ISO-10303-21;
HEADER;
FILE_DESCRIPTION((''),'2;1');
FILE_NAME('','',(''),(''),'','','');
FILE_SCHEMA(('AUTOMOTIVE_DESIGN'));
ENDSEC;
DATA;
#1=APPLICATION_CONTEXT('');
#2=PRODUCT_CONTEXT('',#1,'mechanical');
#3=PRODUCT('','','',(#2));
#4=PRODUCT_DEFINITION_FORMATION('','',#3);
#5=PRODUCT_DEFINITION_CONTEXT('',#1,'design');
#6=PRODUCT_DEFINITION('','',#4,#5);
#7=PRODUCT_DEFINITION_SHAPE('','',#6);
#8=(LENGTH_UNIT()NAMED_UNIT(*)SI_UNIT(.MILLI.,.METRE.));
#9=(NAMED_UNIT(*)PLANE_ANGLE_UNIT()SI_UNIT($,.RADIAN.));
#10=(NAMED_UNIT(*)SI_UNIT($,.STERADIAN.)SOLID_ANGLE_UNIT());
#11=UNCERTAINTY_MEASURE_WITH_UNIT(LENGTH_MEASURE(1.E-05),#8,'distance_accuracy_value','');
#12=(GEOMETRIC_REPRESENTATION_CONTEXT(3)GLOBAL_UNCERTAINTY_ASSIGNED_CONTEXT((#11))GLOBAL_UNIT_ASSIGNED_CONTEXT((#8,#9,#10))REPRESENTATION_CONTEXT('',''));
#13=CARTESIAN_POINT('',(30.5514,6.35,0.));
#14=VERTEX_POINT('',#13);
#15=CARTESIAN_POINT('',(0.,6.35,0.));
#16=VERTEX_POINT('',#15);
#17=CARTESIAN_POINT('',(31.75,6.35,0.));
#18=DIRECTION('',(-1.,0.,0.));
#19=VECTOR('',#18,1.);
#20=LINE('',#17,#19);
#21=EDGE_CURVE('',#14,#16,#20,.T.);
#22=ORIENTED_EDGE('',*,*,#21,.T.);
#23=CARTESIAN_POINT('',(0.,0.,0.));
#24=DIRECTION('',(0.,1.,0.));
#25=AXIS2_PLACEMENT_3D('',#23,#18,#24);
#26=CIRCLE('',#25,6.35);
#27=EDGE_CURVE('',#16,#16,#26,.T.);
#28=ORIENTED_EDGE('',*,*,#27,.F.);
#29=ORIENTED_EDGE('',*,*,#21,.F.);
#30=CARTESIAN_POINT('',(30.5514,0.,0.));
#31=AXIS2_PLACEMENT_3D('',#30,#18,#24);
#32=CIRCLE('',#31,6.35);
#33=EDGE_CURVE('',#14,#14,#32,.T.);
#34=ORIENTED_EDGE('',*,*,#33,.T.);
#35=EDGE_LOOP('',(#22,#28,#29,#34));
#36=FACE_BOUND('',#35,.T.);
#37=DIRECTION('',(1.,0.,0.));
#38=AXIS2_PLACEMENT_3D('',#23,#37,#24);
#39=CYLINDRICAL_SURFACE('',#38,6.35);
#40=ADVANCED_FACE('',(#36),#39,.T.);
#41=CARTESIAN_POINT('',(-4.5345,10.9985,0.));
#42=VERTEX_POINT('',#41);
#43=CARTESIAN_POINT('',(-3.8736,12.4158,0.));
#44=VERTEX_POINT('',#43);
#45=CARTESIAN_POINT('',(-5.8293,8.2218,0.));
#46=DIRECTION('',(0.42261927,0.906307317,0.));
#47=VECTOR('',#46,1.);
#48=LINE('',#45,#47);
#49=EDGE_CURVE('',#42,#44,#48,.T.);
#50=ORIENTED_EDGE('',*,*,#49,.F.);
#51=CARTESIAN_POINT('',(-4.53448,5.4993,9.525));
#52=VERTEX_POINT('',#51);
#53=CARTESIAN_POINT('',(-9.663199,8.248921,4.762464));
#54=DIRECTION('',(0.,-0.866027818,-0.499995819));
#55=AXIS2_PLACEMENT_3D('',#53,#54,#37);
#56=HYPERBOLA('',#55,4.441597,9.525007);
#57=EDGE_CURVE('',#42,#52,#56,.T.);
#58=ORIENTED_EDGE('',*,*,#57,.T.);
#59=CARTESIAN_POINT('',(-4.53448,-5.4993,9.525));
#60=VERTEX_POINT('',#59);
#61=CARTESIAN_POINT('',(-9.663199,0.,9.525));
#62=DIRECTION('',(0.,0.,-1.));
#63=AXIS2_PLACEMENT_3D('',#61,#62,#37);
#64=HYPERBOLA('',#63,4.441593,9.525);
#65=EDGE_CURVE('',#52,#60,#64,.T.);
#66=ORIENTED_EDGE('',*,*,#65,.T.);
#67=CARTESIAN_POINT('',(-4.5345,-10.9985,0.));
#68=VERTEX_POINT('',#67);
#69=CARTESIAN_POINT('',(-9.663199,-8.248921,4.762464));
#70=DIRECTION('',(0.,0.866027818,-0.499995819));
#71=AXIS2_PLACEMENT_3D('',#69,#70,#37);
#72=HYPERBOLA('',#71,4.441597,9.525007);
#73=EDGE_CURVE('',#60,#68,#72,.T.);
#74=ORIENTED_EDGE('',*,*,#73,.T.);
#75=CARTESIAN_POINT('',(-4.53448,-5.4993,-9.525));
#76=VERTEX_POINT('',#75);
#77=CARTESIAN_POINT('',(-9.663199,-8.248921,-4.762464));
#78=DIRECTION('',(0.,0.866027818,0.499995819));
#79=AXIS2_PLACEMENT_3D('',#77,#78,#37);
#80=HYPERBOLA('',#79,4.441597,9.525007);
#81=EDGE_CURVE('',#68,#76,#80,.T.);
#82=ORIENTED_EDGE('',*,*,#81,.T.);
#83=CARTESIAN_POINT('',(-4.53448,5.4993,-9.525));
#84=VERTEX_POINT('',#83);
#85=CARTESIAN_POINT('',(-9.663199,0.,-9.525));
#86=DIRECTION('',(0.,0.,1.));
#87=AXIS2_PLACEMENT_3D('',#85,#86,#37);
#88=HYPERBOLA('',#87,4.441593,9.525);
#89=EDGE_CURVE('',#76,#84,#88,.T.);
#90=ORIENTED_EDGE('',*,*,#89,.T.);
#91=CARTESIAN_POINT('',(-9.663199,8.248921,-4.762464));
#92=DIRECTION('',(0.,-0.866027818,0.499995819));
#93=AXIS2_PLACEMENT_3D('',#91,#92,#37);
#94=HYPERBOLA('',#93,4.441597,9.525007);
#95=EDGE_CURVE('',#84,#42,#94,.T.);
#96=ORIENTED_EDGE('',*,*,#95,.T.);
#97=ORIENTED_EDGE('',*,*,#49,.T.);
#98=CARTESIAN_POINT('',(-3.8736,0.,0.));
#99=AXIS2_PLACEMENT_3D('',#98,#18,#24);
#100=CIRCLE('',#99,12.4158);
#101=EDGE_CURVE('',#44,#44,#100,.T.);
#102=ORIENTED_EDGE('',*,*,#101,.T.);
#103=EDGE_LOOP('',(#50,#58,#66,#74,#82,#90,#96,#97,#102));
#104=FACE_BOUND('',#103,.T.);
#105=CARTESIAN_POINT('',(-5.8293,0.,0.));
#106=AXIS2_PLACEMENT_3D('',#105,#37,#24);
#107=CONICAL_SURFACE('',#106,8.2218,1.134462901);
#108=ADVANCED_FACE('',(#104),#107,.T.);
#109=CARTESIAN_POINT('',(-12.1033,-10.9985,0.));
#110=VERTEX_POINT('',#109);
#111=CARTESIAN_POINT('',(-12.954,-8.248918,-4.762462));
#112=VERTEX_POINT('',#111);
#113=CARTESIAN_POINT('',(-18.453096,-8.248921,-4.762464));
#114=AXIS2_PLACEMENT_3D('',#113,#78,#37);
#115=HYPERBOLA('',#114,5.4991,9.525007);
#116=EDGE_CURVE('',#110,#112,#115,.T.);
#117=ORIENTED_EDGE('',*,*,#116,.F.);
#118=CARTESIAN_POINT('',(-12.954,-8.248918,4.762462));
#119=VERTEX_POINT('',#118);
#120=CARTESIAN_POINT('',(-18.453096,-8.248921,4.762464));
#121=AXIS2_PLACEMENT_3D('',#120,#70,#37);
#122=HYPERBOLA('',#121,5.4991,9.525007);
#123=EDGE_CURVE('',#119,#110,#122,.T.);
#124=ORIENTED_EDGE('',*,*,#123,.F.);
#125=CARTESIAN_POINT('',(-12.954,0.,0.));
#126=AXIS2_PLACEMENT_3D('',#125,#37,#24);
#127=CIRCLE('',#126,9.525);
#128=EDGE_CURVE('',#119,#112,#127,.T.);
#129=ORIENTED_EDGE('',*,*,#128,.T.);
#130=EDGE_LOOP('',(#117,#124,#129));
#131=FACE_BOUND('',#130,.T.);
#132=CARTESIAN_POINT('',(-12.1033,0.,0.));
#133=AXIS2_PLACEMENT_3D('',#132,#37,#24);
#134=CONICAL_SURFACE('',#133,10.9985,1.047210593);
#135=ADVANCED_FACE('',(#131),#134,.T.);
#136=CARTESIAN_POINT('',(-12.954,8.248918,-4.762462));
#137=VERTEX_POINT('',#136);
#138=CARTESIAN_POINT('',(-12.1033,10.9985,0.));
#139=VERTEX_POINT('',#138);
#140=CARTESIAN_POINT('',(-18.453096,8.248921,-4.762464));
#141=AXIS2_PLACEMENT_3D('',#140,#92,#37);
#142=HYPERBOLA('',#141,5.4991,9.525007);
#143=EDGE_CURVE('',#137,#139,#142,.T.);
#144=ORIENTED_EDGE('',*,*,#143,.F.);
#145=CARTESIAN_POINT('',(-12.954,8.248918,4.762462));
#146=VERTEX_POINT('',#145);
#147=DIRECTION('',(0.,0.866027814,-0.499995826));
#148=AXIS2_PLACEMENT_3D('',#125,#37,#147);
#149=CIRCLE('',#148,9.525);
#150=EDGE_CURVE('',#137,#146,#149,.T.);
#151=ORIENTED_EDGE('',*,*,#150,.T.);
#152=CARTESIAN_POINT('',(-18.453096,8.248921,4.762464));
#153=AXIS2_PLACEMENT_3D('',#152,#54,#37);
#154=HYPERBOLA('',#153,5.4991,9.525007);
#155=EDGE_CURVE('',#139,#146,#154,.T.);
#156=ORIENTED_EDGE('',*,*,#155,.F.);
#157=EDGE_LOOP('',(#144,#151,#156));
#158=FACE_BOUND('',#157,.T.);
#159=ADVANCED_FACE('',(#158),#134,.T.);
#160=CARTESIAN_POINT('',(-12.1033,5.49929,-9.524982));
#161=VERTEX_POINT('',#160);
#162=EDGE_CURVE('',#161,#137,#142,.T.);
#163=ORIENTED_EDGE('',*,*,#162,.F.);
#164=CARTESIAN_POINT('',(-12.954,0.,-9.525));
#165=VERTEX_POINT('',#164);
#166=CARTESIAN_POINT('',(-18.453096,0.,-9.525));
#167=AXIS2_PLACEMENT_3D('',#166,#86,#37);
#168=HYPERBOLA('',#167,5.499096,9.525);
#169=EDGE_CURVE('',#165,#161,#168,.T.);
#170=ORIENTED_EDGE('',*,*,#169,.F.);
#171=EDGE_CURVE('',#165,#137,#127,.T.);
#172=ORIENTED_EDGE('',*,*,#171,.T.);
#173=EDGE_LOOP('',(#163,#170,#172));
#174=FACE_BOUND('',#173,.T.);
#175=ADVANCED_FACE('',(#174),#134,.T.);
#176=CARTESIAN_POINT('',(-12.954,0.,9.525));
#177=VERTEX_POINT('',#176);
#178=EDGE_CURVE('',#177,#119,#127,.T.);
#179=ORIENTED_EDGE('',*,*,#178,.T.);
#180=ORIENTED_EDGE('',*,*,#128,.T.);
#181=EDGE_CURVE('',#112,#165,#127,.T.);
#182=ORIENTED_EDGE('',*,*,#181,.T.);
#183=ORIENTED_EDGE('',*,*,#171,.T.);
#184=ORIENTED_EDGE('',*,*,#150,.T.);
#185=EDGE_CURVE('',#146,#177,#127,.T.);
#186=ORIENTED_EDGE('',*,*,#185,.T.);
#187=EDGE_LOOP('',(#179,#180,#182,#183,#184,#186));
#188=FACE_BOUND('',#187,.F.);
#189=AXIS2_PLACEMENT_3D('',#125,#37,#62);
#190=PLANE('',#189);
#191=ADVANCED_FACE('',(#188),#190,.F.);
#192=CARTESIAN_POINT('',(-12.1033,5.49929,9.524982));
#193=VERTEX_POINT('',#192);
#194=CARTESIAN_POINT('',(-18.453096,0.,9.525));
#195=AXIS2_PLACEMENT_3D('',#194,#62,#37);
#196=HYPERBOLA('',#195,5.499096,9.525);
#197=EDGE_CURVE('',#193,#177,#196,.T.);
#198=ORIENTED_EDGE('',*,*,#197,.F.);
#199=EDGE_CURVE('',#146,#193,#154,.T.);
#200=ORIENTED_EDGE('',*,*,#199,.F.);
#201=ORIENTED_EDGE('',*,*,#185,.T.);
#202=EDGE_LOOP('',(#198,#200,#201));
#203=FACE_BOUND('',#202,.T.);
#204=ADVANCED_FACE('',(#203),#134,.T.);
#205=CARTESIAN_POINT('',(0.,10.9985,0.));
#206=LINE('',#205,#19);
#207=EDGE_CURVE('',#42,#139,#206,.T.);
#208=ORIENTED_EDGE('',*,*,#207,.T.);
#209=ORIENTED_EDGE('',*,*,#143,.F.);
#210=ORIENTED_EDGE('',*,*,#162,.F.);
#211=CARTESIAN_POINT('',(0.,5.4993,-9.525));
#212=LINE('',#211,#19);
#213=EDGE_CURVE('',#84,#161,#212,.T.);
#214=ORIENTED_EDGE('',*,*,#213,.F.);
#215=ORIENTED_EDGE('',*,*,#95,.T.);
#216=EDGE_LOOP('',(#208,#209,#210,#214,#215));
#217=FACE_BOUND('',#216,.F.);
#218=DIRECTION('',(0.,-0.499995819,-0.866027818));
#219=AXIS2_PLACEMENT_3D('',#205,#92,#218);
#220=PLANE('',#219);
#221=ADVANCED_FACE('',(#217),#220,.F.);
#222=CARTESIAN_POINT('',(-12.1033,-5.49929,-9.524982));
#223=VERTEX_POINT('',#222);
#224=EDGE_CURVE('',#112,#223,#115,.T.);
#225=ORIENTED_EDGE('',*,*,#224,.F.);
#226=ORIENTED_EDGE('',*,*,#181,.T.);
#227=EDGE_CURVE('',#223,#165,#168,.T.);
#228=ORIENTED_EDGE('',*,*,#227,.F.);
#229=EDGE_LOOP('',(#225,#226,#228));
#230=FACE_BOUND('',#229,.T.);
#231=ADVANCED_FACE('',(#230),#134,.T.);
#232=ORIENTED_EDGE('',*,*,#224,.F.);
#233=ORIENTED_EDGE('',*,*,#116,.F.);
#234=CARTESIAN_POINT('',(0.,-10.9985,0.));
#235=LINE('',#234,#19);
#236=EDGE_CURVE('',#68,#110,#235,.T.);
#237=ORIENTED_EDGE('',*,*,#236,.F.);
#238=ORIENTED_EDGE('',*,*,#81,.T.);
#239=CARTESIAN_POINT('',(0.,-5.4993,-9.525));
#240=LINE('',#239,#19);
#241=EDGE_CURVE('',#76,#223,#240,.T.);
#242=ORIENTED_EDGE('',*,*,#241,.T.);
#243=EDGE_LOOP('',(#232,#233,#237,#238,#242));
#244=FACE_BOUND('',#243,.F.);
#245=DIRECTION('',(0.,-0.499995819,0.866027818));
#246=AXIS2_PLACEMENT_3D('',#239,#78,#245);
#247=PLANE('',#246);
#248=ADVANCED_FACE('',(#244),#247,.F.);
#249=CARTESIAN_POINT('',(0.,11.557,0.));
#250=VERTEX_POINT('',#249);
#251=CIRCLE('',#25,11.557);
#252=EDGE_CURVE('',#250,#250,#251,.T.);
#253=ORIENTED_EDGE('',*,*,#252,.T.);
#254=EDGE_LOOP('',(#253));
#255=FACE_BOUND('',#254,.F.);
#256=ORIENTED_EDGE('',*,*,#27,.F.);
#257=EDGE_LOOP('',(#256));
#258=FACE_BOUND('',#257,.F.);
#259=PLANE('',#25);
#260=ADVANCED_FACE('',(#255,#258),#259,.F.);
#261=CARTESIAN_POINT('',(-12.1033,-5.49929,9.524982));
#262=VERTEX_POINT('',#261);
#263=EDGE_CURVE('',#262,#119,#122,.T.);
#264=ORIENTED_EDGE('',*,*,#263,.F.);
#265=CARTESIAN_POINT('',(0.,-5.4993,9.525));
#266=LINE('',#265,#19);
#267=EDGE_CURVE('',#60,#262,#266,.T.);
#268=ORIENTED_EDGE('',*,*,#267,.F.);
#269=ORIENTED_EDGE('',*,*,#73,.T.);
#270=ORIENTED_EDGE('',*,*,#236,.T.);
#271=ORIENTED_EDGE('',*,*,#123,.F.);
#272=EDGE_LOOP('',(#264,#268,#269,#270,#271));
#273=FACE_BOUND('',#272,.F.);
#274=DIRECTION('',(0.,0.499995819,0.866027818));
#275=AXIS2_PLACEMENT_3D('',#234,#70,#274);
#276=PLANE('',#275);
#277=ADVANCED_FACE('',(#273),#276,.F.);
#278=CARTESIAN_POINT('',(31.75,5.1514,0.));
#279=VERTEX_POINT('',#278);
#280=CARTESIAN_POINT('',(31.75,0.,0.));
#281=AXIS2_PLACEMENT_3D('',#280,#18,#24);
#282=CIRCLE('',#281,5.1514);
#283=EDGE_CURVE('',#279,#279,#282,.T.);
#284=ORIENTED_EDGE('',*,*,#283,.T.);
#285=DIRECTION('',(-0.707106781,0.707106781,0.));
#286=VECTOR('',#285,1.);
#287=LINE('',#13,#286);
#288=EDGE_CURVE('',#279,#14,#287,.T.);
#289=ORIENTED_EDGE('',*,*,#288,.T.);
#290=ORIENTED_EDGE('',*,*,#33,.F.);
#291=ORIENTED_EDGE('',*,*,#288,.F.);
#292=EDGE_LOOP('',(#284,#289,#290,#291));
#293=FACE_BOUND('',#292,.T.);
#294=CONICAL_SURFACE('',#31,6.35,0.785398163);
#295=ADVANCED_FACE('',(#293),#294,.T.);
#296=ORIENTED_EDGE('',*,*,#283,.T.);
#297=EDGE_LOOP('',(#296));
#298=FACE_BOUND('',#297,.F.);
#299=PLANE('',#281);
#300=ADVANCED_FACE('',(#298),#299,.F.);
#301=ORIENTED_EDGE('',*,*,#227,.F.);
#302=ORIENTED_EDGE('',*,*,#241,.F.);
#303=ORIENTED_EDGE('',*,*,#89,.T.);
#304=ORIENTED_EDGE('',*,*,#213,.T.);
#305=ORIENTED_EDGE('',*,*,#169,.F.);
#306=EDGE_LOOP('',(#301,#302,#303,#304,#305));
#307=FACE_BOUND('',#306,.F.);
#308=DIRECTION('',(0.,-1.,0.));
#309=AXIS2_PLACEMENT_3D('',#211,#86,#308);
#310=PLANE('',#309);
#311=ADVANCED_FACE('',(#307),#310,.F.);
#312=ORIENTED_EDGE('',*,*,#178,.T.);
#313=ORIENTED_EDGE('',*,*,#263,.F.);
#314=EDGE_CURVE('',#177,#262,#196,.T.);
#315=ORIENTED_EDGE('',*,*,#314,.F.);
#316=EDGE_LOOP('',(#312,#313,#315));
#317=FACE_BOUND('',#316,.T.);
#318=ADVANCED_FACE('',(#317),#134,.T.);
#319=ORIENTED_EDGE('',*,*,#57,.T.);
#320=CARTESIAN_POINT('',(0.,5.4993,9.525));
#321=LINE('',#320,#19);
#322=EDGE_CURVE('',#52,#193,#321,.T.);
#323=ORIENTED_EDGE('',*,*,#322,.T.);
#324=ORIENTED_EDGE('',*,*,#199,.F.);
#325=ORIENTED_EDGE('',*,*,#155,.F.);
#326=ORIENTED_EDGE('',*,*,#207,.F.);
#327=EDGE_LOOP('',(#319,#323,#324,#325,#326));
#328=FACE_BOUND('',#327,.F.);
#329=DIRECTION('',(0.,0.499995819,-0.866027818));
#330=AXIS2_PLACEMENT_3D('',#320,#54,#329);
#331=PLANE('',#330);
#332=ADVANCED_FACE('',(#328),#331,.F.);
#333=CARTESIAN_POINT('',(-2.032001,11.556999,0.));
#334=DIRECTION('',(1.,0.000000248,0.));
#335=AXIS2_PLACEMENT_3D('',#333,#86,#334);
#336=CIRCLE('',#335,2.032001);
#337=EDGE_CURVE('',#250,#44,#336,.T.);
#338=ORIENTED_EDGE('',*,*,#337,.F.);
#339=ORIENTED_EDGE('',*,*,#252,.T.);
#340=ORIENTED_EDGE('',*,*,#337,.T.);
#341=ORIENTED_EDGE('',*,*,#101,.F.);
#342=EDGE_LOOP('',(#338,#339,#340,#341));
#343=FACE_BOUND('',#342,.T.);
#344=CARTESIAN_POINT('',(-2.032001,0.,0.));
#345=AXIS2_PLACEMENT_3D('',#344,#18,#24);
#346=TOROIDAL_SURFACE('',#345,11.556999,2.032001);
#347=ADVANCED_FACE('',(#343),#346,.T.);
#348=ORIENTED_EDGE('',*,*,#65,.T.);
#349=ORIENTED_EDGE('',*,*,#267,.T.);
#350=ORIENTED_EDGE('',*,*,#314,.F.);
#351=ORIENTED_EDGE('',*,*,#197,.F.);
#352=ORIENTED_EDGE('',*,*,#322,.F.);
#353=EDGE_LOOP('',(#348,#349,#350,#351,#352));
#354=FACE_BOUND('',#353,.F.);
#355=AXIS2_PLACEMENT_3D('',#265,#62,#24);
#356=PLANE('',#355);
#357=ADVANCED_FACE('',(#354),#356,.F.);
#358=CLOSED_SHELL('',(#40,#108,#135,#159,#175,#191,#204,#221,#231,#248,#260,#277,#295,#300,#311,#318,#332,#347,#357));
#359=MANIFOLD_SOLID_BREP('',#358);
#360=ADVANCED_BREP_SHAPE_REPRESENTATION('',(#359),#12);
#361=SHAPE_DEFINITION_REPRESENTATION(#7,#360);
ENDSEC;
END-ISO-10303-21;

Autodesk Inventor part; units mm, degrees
ref_plane "YZ Plane" through (0, 0, 0) normal (1, 0, 0) x (0, 1, 0)
ref_plane "XZ Plane" through (0, 0, 0) normal (0, 1, 0) x (-1, 0, 0)
sketch "Sketch1" plane through (0, 0, 0) normal (0, 0, 1) x (1, 0, 0)
  line L0 (-5.8293, 0) -> (-5.8293, 8.2218)
  line L1 (0, 11.557) -> (0, 6.35)
  line L2 (5.1308, 6.35) -> (31.75, 6.35)
  line L3 (31.75, 6.35) -> (31.75, 0)
  line L4 (31.75, 0) -> (-5.8293, 0)
  arc A0 (0, 11.557) -> (-3.8736, 12.4158) centre (-2.032, 11.557) ccw
  line L5 (0, -2.794) -> (0, 16.7643) projected
  line L6 (-13.3452, 0) -> (39.2659, 0) projected
  line L7 (0, 6.35) -> (0.0001, 6.35)
  line L8 (0.0001, 6.35) -> (0.0001, 6.35)
  line L9 (0.0001, 6.35) -> (2.2098, 6.35)
  line L10 (2.2098, 6.35) -> (5.1308, 6.35)
  line L11 (-5.8293, 8.2218) -> (-3.8736, 12.4158)
  line L12 (0.0001, 6.35) -> (5.1308, 6.35) construction
  line L13 (5.1308, 6.35) -> (5.1308, 0) construction
  dimension "d0" = 2.032
  dimension "d1" = 31.75
  dimension "d2" = 26.6192
  dimension "d3" = 27.178
  dimension "d4" = 12.7
  dimension "d5" = 5.8293
  dimension "d15" = 12.7
  dimension "d16" = 12.7
  dimension "d17" = 0.0001
  dimension "d18" = 2.921
  dimension "d19" = 25
revolve "Body" add sketch "Sketch1" angle 360 about axis through (31.75, 0, 0) along (-1, 0, 0)
sketch "Sketch2" plane through (0, 0, 0) normal (1, 0, 0) x (0, 0, -1)
  line L0 (9.525, 5.4993) -> (9.525, -5.4993)
  line L1 (9.525, -5.4993) -> (0, -10.9985)
  line L2 (0, -10.9985) -> (-9.525, -5.4993)
  line L3 (-9.525, -5.4993) -> (-9.525, 5.4993)
  line L4 (-9.525, 5.4993) -> (0, 10.9985)
  line L5 (0, 10.9985) -> (9.525, 5.4993)
  point P0 (0, 0)
  point P1 (0, 0)
  dimension "d23" = 19.05
extrude "Head" add sketch "Sketch2" against normal blind 12.954
sketch "Sketch3" plane through (0, 0, 0) normal (0, 0, 1) x (1, 0, 0)
  line L0 (-12.954, 9.525) -> (-12.954, 10.9985)
  line L1 (-12.954, 10.9985) -> (-12.1033, 10.9985)
  line L2 (-12.1033, 10.9985) -> (-12.954, 9.525)
  line L3 (-14.6379, 0) -> (-2.8506, 0) projected
  line L4 (-12.954, 10.9985) -> (-12.954, 5.4993) projected
  line L5 (-4.5345, 10.9985) -> (-12.954, 10.9985) projected
  point P0 (-12.954, 5.4993)
  dimension "d8" = 30
  dimension "d22" = 19.05
revolve "Chamfer1" cut sketch "Sketch3" angle 360 about axis through (-10, 0, 0) along (1, 0, 0)
thread "Thread" size "1/2-13 UNC" class "2A" standard "ANSI Unified Screw Threads" length 26.6192
chamfer "Chamfer2" distance 1.1986 distance2 1.1986 1 edges at (31.75, -6.35, 0) measured on face at (31.75, 0.2551, 2.1012)
ref_plane "Work Plane1" through (10.95, 0, 0) normal (0, 0, -1) x (1, 0, 0)
equation "\"d0\" = PHH"
equation "\"d1\" = NLG"
equation "\"d2\" = GEL"
equation "\"d3\" = LADI"
equation "\"d4\" = GD"
equation "\"d5\" = 0.45 * KOH"
equation "\"d15\" = SD2"
equation "\"d16\" = BDM"
equation "\"d18\" = GAL"
equation "\"d19\" = KEWI"
equation "\"d23\" = SW"
equation "\"d6\" = KOH"
equation "\"d8\" = ANG1"
equation "\"d22\" = SW0"
equation "\"d10\" = GEL"
equation "\"d13\" = -0.5 * SPD + 0.5 * GD"
equation "\"d14\" = GUL"
equation "\"NLG\" = 31.75"
equation "\"GD\" = NND"
equation "\"BDM\" = NND"
equation "\"KOH\" = 12.954"
equation "\"GEL\" = 26.6192"
equation "\"LADI\" = 27.178"
equation "\"SW\" = 19.05"
equation "\"PHH\" = 2.032"
equation "\"SW0\" = SW"
equation "\"SPD\" = 10.30283"
equation "\"SD2\" = NND"
equation "\"SD\" = 0"
equation "\"ANG1\" = 30deg"
equation "\"KEWI\" = 25deg"
equation "\"GAL\" = 2.921"
equation "\"GUL\" = 1.19859"
equation "\"THREADDIA\" = 12.7"
equation "\"SDH\" = SW"
equation "\"TOA\" = 30deg"
equation "\"NND\" = 12.7"
equation "\"E0\" = 1.155 * SW"
equation "\"GD1\" = 10.30283"
properties part number "IFI 111 - 1/2-13 UNC x 1,25" material "Steel, Mild"
